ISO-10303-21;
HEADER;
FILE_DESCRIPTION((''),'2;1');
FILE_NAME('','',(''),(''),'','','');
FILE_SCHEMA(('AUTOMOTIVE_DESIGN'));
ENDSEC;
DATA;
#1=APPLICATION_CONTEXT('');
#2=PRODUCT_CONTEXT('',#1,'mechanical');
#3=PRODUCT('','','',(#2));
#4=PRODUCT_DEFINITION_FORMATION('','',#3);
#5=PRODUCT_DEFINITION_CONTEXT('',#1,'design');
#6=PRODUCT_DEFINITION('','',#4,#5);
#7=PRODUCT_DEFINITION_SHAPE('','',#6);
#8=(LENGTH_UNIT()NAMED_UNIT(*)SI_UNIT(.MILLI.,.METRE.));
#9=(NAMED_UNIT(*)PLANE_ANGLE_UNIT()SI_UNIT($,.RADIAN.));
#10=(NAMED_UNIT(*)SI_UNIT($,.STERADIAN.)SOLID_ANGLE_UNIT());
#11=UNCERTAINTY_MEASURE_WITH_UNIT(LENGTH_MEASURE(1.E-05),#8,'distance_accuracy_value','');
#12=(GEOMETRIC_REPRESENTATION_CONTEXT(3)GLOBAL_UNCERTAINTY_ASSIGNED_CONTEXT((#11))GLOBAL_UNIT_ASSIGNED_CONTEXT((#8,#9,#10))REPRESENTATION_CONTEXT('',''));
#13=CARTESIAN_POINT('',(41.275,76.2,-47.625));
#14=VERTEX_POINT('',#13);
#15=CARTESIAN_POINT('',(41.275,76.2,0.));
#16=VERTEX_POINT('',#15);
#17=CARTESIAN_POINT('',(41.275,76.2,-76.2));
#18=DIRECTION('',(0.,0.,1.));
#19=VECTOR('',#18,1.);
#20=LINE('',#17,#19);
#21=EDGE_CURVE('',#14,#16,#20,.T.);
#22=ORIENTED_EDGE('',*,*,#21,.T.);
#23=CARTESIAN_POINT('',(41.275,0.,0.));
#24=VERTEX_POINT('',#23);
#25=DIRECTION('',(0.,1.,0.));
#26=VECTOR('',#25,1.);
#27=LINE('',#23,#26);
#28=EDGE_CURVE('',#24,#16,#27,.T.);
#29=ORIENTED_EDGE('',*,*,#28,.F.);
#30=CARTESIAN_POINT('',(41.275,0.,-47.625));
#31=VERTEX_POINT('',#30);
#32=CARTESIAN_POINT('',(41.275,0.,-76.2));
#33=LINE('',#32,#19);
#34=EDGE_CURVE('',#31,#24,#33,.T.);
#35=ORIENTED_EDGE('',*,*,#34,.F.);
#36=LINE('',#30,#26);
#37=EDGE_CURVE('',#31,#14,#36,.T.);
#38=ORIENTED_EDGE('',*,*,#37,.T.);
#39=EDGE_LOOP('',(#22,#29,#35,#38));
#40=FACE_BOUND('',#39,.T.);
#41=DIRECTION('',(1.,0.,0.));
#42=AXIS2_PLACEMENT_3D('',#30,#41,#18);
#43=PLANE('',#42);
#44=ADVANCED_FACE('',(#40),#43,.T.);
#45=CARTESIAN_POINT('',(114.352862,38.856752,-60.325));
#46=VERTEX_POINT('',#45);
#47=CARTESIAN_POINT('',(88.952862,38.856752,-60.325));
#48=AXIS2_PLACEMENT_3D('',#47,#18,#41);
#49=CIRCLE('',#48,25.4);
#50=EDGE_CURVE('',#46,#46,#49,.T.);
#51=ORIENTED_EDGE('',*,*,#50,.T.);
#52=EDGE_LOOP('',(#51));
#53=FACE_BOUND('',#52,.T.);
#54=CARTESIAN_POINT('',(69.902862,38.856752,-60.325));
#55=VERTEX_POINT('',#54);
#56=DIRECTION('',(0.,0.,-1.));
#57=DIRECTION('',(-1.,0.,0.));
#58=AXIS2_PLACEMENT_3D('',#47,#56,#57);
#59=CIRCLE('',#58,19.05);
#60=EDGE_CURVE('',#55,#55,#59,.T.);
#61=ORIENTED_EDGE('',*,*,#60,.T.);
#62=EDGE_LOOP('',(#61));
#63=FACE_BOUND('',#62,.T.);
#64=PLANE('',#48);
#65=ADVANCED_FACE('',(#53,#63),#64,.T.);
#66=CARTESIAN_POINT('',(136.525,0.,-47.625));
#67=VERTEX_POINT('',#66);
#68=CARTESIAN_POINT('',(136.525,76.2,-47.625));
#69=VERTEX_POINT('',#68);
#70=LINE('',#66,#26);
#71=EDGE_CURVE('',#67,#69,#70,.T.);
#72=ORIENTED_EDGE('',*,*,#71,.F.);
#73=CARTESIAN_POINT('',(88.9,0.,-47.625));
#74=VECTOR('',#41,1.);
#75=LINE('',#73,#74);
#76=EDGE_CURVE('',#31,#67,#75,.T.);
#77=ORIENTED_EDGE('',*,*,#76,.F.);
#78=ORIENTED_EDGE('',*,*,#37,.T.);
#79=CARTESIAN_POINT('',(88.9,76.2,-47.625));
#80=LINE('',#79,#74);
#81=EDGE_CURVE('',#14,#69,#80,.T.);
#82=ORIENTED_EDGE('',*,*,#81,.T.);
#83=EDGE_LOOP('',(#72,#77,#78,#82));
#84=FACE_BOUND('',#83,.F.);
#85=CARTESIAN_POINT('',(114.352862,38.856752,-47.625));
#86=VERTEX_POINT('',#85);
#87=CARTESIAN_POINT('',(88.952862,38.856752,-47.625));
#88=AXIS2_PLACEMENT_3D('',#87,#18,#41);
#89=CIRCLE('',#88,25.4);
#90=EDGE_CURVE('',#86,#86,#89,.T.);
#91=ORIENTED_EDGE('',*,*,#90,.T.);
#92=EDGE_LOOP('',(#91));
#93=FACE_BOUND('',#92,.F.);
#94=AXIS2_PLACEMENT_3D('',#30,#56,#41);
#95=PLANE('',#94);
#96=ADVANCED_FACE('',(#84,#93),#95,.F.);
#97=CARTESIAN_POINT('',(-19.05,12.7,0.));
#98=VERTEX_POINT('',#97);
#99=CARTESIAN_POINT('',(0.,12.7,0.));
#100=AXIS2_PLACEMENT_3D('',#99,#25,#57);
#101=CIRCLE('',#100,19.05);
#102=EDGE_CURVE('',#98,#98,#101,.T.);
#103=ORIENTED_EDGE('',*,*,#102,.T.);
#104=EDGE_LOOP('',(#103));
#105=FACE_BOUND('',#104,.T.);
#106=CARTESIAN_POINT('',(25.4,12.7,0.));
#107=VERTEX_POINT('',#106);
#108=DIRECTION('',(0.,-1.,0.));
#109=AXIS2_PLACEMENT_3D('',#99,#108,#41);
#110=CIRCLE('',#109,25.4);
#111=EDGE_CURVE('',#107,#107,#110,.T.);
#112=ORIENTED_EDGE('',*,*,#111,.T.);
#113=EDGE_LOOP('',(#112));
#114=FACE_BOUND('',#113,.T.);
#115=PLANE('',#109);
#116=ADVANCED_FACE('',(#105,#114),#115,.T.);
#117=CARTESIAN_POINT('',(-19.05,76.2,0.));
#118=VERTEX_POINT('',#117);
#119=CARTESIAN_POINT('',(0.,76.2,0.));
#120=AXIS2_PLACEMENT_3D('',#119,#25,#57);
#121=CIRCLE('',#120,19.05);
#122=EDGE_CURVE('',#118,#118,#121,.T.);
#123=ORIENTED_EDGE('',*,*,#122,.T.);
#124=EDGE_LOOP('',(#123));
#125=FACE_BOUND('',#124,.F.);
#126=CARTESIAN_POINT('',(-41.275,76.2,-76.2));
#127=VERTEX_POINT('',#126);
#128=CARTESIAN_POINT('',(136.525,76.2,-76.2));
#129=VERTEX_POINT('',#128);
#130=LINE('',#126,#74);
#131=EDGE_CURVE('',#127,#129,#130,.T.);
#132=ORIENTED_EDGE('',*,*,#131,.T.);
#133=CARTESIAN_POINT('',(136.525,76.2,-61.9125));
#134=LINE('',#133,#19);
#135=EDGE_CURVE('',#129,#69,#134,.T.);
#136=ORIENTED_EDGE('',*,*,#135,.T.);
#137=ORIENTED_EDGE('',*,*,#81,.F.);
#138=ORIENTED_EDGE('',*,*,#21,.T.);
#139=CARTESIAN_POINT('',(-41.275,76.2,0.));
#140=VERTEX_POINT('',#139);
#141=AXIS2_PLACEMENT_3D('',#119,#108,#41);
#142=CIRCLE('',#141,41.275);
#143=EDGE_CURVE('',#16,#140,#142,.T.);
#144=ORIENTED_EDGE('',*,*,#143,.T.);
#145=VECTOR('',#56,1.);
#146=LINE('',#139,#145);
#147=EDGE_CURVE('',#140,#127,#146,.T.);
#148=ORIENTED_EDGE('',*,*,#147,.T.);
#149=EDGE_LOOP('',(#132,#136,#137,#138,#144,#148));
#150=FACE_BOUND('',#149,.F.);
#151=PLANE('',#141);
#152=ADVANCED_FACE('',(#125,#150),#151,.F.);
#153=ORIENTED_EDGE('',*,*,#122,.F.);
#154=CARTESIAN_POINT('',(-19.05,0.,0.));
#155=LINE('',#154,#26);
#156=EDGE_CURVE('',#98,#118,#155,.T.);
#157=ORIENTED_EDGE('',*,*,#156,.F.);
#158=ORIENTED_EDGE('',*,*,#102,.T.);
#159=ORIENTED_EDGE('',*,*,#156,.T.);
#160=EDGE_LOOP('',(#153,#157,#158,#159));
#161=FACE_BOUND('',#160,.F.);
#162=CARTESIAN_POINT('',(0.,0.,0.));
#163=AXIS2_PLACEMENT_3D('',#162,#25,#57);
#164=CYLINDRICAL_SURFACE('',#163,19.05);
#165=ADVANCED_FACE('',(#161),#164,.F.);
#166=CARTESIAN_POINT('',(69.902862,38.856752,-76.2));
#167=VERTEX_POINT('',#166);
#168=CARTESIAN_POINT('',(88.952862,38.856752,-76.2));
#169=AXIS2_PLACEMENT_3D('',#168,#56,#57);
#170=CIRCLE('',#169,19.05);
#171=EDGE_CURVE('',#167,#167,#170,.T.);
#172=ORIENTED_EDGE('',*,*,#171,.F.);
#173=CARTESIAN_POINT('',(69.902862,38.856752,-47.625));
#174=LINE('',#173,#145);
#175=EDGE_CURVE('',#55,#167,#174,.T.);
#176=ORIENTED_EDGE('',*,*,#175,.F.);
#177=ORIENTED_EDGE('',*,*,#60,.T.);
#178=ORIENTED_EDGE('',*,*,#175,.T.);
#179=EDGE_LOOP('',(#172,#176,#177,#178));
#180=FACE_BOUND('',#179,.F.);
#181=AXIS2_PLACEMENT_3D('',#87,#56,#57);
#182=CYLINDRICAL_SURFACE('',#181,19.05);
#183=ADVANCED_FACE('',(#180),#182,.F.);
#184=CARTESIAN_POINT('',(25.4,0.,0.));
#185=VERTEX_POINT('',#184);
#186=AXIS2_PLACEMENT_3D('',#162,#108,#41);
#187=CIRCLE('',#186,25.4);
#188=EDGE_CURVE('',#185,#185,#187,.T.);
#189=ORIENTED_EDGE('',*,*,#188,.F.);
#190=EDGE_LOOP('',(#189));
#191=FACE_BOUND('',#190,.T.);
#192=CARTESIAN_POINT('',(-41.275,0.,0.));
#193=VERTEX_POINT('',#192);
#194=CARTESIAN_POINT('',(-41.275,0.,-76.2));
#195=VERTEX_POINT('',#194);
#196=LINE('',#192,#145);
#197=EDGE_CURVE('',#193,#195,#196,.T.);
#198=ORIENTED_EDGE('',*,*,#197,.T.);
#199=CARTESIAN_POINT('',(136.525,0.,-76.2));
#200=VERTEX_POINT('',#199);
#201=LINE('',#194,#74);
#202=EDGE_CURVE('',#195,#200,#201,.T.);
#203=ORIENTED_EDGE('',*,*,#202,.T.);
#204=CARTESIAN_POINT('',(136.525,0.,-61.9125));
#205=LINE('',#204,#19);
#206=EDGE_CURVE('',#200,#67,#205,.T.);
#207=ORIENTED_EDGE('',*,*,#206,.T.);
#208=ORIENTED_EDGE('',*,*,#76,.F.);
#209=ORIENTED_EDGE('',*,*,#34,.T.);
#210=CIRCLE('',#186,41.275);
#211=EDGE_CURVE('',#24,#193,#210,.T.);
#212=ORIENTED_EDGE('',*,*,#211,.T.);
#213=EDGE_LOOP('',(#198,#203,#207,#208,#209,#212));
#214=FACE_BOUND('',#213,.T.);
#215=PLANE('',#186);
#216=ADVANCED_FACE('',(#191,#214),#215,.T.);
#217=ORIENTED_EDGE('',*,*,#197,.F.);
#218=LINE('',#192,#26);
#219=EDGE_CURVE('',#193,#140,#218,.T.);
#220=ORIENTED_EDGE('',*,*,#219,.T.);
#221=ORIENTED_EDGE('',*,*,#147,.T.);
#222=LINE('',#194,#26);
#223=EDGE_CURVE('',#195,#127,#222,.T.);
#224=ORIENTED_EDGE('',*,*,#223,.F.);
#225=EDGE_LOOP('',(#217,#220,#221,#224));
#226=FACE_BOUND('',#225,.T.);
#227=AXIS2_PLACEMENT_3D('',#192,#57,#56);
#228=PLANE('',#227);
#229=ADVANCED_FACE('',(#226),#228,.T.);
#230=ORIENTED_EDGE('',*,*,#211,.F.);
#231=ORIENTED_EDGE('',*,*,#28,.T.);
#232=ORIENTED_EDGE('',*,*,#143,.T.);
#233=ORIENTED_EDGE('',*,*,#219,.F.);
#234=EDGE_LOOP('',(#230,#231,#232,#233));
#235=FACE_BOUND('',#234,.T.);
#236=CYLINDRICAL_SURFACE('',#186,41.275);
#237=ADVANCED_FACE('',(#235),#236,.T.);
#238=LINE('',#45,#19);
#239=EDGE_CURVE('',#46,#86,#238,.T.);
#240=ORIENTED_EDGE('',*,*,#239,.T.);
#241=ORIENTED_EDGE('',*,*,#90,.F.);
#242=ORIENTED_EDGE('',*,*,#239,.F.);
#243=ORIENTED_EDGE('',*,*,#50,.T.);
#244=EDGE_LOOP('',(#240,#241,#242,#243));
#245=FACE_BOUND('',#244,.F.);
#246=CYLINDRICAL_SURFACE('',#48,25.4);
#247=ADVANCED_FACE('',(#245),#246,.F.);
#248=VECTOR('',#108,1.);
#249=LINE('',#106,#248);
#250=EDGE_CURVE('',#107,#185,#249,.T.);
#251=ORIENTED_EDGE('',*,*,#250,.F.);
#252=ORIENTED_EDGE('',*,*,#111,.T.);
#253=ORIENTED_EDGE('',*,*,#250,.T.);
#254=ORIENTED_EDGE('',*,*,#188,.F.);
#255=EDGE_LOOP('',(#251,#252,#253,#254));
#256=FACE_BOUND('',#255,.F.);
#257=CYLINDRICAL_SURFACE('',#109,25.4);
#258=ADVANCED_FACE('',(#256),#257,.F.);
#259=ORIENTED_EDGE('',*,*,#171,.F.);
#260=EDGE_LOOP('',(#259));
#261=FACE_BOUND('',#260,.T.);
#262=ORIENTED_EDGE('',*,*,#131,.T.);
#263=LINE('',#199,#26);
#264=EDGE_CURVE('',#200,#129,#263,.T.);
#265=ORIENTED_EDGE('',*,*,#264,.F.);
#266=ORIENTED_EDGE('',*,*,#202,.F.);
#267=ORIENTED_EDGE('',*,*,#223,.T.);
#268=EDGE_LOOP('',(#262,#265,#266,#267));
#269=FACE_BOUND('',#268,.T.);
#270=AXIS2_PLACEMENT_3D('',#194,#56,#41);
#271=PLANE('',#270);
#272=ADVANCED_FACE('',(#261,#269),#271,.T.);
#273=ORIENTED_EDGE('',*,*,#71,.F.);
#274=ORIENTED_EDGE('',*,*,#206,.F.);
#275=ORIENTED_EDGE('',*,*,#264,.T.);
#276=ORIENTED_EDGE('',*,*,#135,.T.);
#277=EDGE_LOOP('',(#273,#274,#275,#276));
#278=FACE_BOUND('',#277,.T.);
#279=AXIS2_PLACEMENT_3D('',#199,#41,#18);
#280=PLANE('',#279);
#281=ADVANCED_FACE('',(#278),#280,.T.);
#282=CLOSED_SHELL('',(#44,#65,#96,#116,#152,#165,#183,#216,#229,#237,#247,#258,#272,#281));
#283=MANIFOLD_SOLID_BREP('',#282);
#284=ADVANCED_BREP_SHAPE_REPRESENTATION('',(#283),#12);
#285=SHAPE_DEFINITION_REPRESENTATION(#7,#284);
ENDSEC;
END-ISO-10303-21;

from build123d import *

# Parameters (mm, degrees)
F0_R           = 19.05
F0_W           = 95.25
F0_H           = 28.575
F1_DEPTH       = 76.2
F3_D           = 38.1
F3_CBORE_D     = 50.8
F3_CBORE_DEPTH = 12.7
F5_D           = 38.1
F5_CBORE_D     = 50.8
F5_CBORE_DEPTH = 12.7


# Not quite as in the source:
# - a length typed as a fraction of an inch, garbled in the dataset ("3 / 203.2 mm" for 3/8 in), is restored


with BuildPart() as f1:
    # F0 (on Front) → F1 (new body)
    with BuildSketch(Plane.XZ):
        with BuildLine():
            ThreePointArc((-41.275, 0), (0, -41.275), (41.275, 0))
            ThreePointArc((41.275, 0), (0, 41.275), (-41.275, 0))
        make_face()
        Circle(F0_R, mode=Mode.SUBTRACT)
        with BuildLine():
            Line((41.275, -47.625), (41.275, 0))
            ThreePointArc((41.275, 0), (0, -41.275), (-41.275, 0))
            Line((-41.275, 0), (-41.275, -76.2))
            Line((-41.275, -76.2), (41.275, -76.2))
            Line((41.275, -76.2), (41.275, -47.625))
        make_face()
        with Locations((88.9, -61.9125)):
            Rectangle(F0_W, F0_H)
        Circle(F0_R)
    extrude(amount=-F1_DEPTH)

    # F3 (through all)
    with Locations(Plane.XY.offset(-47.625)):
        with Locations((88.9528617263, 38.8567522168)):
            CounterBoreHole(F3_D / 2, F3_CBORE_D / 2, F3_CBORE_DEPTH)

    # F5 (through all)
    with Locations(Plane.XZ):
        with Locations((0, 0)):
            CounterBoreHole(F5_D / 2, F5_CBORE_D / 2, F5_CBORE_DEPTH)


solid = f1.part
